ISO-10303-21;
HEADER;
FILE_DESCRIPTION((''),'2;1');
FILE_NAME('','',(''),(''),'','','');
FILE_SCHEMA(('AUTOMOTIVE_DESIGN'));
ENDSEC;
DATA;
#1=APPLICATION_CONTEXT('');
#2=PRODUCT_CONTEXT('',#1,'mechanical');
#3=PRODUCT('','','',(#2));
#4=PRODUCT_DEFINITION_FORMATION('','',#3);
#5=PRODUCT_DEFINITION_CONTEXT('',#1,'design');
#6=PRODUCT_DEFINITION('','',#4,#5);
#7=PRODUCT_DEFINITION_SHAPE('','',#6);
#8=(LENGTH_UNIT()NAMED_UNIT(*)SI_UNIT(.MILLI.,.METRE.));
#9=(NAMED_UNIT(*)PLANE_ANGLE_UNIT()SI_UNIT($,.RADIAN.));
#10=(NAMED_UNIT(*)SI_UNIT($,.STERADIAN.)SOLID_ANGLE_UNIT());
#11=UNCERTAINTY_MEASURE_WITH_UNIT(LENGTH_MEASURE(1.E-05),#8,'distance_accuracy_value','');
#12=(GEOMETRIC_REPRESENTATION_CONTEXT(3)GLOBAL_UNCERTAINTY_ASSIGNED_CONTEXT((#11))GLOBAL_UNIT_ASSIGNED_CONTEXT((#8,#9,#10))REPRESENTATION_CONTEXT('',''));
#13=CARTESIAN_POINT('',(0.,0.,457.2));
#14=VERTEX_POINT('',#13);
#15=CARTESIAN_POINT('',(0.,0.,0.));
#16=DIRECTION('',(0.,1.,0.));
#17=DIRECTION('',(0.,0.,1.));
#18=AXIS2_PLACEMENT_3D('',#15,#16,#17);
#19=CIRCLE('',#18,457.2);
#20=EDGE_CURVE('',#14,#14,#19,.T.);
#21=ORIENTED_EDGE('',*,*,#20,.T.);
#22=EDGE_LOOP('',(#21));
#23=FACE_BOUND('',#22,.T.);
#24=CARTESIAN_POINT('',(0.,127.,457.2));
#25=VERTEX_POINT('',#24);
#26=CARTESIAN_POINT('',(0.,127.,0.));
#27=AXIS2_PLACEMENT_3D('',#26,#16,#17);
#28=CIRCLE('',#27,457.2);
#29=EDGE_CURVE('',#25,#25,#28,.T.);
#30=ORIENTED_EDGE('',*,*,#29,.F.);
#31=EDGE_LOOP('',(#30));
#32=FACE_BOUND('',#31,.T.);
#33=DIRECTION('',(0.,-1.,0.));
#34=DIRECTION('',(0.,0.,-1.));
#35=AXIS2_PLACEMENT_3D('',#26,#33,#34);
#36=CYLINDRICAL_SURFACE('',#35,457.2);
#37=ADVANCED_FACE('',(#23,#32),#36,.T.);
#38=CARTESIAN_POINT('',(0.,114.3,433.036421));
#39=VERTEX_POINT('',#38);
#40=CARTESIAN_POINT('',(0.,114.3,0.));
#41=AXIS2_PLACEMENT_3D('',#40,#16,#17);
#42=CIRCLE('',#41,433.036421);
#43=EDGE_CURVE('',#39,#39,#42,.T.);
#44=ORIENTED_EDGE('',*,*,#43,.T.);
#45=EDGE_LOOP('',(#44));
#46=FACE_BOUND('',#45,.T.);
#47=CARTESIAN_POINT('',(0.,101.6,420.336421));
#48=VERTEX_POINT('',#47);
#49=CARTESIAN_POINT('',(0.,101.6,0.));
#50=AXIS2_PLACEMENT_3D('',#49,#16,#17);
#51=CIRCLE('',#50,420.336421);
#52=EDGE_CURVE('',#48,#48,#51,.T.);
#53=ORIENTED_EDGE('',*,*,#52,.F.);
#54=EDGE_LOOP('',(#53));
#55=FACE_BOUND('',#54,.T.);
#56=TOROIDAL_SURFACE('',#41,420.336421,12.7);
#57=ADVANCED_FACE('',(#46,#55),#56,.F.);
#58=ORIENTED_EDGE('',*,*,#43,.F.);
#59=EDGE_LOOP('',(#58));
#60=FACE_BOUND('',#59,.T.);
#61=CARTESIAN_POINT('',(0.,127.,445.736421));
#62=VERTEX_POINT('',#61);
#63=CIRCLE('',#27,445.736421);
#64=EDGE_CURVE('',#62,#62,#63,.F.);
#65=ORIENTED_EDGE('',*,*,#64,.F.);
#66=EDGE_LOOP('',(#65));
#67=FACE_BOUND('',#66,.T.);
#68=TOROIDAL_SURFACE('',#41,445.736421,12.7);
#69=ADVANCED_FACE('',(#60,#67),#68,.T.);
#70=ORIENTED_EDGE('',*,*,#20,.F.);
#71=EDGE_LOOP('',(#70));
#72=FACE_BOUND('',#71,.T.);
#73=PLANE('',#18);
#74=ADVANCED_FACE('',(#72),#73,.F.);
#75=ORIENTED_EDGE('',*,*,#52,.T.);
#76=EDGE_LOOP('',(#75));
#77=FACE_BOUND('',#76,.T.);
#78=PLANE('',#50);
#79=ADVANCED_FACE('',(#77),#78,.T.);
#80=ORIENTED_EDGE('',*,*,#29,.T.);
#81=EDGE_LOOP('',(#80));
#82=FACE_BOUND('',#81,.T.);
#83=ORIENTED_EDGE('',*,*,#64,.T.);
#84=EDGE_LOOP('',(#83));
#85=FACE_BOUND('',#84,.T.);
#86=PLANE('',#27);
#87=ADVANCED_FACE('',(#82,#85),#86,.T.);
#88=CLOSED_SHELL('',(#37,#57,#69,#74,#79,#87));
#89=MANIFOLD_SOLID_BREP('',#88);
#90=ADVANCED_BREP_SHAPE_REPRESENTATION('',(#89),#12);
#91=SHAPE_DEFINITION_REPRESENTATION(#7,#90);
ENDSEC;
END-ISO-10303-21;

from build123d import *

# Parameters (mm, degrees)
SKETCH1_R           = 457.2
BOSS_EXTRUDE1_DEPTH = 127
SKETCH2_R           = 433.036421312
CUT_EXTRUDE2_DEPTH  = 25.4
FILLET3_R           = 12.7
FILLET4_R           = 12.7


with BuildPart() as part:
    # Sketch1 → Boss-Extrude1 (new body)
    with BuildSketch(Plane(origin=(0, 0, 0), x_dir=(1, 0, 0), z_dir=(0, 1, 0))):
        with Locations(Location((0, 0, 0), (0, 0, 270))):
            Circle(SKETCH1_R)
    extrude(amount=BOSS_EXTRUDE1_DEPTH)

    # Sketch2 → Cut-Extrude2 (cut)
    with BuildSketch(Plane(origin=(0, 127, 0), x_dir=(1, 0, 0), z_dir=(0, 1, 0))):
        with Locations(Location((0, 0, 0), (0, 0, 270))):
            Circle(SKETCH2_R)
    extrude(amount=-CUT_EXTRUDE2_DEPTH, mode=Mode.SUBTRACT)

    # Fillet3
    fillet3_edges = [part.edges().sort_by_distance(p)[0] for p in [
        (0, 127, -433.036421312),
    ]]
    fillet(fillet3_edges, radius=FILLET3_R)

    # Fillet4
    fillet4_edges = [part.edges().sort_by_distance(p)[0] for p in [
        (0, 101.6, -433.036421312),
    ]]
    fillet(fillet4_edges, radius=FILLET4_R - 0.0001)  # a hair under: the kernel refuses the full size


solid = part.part
